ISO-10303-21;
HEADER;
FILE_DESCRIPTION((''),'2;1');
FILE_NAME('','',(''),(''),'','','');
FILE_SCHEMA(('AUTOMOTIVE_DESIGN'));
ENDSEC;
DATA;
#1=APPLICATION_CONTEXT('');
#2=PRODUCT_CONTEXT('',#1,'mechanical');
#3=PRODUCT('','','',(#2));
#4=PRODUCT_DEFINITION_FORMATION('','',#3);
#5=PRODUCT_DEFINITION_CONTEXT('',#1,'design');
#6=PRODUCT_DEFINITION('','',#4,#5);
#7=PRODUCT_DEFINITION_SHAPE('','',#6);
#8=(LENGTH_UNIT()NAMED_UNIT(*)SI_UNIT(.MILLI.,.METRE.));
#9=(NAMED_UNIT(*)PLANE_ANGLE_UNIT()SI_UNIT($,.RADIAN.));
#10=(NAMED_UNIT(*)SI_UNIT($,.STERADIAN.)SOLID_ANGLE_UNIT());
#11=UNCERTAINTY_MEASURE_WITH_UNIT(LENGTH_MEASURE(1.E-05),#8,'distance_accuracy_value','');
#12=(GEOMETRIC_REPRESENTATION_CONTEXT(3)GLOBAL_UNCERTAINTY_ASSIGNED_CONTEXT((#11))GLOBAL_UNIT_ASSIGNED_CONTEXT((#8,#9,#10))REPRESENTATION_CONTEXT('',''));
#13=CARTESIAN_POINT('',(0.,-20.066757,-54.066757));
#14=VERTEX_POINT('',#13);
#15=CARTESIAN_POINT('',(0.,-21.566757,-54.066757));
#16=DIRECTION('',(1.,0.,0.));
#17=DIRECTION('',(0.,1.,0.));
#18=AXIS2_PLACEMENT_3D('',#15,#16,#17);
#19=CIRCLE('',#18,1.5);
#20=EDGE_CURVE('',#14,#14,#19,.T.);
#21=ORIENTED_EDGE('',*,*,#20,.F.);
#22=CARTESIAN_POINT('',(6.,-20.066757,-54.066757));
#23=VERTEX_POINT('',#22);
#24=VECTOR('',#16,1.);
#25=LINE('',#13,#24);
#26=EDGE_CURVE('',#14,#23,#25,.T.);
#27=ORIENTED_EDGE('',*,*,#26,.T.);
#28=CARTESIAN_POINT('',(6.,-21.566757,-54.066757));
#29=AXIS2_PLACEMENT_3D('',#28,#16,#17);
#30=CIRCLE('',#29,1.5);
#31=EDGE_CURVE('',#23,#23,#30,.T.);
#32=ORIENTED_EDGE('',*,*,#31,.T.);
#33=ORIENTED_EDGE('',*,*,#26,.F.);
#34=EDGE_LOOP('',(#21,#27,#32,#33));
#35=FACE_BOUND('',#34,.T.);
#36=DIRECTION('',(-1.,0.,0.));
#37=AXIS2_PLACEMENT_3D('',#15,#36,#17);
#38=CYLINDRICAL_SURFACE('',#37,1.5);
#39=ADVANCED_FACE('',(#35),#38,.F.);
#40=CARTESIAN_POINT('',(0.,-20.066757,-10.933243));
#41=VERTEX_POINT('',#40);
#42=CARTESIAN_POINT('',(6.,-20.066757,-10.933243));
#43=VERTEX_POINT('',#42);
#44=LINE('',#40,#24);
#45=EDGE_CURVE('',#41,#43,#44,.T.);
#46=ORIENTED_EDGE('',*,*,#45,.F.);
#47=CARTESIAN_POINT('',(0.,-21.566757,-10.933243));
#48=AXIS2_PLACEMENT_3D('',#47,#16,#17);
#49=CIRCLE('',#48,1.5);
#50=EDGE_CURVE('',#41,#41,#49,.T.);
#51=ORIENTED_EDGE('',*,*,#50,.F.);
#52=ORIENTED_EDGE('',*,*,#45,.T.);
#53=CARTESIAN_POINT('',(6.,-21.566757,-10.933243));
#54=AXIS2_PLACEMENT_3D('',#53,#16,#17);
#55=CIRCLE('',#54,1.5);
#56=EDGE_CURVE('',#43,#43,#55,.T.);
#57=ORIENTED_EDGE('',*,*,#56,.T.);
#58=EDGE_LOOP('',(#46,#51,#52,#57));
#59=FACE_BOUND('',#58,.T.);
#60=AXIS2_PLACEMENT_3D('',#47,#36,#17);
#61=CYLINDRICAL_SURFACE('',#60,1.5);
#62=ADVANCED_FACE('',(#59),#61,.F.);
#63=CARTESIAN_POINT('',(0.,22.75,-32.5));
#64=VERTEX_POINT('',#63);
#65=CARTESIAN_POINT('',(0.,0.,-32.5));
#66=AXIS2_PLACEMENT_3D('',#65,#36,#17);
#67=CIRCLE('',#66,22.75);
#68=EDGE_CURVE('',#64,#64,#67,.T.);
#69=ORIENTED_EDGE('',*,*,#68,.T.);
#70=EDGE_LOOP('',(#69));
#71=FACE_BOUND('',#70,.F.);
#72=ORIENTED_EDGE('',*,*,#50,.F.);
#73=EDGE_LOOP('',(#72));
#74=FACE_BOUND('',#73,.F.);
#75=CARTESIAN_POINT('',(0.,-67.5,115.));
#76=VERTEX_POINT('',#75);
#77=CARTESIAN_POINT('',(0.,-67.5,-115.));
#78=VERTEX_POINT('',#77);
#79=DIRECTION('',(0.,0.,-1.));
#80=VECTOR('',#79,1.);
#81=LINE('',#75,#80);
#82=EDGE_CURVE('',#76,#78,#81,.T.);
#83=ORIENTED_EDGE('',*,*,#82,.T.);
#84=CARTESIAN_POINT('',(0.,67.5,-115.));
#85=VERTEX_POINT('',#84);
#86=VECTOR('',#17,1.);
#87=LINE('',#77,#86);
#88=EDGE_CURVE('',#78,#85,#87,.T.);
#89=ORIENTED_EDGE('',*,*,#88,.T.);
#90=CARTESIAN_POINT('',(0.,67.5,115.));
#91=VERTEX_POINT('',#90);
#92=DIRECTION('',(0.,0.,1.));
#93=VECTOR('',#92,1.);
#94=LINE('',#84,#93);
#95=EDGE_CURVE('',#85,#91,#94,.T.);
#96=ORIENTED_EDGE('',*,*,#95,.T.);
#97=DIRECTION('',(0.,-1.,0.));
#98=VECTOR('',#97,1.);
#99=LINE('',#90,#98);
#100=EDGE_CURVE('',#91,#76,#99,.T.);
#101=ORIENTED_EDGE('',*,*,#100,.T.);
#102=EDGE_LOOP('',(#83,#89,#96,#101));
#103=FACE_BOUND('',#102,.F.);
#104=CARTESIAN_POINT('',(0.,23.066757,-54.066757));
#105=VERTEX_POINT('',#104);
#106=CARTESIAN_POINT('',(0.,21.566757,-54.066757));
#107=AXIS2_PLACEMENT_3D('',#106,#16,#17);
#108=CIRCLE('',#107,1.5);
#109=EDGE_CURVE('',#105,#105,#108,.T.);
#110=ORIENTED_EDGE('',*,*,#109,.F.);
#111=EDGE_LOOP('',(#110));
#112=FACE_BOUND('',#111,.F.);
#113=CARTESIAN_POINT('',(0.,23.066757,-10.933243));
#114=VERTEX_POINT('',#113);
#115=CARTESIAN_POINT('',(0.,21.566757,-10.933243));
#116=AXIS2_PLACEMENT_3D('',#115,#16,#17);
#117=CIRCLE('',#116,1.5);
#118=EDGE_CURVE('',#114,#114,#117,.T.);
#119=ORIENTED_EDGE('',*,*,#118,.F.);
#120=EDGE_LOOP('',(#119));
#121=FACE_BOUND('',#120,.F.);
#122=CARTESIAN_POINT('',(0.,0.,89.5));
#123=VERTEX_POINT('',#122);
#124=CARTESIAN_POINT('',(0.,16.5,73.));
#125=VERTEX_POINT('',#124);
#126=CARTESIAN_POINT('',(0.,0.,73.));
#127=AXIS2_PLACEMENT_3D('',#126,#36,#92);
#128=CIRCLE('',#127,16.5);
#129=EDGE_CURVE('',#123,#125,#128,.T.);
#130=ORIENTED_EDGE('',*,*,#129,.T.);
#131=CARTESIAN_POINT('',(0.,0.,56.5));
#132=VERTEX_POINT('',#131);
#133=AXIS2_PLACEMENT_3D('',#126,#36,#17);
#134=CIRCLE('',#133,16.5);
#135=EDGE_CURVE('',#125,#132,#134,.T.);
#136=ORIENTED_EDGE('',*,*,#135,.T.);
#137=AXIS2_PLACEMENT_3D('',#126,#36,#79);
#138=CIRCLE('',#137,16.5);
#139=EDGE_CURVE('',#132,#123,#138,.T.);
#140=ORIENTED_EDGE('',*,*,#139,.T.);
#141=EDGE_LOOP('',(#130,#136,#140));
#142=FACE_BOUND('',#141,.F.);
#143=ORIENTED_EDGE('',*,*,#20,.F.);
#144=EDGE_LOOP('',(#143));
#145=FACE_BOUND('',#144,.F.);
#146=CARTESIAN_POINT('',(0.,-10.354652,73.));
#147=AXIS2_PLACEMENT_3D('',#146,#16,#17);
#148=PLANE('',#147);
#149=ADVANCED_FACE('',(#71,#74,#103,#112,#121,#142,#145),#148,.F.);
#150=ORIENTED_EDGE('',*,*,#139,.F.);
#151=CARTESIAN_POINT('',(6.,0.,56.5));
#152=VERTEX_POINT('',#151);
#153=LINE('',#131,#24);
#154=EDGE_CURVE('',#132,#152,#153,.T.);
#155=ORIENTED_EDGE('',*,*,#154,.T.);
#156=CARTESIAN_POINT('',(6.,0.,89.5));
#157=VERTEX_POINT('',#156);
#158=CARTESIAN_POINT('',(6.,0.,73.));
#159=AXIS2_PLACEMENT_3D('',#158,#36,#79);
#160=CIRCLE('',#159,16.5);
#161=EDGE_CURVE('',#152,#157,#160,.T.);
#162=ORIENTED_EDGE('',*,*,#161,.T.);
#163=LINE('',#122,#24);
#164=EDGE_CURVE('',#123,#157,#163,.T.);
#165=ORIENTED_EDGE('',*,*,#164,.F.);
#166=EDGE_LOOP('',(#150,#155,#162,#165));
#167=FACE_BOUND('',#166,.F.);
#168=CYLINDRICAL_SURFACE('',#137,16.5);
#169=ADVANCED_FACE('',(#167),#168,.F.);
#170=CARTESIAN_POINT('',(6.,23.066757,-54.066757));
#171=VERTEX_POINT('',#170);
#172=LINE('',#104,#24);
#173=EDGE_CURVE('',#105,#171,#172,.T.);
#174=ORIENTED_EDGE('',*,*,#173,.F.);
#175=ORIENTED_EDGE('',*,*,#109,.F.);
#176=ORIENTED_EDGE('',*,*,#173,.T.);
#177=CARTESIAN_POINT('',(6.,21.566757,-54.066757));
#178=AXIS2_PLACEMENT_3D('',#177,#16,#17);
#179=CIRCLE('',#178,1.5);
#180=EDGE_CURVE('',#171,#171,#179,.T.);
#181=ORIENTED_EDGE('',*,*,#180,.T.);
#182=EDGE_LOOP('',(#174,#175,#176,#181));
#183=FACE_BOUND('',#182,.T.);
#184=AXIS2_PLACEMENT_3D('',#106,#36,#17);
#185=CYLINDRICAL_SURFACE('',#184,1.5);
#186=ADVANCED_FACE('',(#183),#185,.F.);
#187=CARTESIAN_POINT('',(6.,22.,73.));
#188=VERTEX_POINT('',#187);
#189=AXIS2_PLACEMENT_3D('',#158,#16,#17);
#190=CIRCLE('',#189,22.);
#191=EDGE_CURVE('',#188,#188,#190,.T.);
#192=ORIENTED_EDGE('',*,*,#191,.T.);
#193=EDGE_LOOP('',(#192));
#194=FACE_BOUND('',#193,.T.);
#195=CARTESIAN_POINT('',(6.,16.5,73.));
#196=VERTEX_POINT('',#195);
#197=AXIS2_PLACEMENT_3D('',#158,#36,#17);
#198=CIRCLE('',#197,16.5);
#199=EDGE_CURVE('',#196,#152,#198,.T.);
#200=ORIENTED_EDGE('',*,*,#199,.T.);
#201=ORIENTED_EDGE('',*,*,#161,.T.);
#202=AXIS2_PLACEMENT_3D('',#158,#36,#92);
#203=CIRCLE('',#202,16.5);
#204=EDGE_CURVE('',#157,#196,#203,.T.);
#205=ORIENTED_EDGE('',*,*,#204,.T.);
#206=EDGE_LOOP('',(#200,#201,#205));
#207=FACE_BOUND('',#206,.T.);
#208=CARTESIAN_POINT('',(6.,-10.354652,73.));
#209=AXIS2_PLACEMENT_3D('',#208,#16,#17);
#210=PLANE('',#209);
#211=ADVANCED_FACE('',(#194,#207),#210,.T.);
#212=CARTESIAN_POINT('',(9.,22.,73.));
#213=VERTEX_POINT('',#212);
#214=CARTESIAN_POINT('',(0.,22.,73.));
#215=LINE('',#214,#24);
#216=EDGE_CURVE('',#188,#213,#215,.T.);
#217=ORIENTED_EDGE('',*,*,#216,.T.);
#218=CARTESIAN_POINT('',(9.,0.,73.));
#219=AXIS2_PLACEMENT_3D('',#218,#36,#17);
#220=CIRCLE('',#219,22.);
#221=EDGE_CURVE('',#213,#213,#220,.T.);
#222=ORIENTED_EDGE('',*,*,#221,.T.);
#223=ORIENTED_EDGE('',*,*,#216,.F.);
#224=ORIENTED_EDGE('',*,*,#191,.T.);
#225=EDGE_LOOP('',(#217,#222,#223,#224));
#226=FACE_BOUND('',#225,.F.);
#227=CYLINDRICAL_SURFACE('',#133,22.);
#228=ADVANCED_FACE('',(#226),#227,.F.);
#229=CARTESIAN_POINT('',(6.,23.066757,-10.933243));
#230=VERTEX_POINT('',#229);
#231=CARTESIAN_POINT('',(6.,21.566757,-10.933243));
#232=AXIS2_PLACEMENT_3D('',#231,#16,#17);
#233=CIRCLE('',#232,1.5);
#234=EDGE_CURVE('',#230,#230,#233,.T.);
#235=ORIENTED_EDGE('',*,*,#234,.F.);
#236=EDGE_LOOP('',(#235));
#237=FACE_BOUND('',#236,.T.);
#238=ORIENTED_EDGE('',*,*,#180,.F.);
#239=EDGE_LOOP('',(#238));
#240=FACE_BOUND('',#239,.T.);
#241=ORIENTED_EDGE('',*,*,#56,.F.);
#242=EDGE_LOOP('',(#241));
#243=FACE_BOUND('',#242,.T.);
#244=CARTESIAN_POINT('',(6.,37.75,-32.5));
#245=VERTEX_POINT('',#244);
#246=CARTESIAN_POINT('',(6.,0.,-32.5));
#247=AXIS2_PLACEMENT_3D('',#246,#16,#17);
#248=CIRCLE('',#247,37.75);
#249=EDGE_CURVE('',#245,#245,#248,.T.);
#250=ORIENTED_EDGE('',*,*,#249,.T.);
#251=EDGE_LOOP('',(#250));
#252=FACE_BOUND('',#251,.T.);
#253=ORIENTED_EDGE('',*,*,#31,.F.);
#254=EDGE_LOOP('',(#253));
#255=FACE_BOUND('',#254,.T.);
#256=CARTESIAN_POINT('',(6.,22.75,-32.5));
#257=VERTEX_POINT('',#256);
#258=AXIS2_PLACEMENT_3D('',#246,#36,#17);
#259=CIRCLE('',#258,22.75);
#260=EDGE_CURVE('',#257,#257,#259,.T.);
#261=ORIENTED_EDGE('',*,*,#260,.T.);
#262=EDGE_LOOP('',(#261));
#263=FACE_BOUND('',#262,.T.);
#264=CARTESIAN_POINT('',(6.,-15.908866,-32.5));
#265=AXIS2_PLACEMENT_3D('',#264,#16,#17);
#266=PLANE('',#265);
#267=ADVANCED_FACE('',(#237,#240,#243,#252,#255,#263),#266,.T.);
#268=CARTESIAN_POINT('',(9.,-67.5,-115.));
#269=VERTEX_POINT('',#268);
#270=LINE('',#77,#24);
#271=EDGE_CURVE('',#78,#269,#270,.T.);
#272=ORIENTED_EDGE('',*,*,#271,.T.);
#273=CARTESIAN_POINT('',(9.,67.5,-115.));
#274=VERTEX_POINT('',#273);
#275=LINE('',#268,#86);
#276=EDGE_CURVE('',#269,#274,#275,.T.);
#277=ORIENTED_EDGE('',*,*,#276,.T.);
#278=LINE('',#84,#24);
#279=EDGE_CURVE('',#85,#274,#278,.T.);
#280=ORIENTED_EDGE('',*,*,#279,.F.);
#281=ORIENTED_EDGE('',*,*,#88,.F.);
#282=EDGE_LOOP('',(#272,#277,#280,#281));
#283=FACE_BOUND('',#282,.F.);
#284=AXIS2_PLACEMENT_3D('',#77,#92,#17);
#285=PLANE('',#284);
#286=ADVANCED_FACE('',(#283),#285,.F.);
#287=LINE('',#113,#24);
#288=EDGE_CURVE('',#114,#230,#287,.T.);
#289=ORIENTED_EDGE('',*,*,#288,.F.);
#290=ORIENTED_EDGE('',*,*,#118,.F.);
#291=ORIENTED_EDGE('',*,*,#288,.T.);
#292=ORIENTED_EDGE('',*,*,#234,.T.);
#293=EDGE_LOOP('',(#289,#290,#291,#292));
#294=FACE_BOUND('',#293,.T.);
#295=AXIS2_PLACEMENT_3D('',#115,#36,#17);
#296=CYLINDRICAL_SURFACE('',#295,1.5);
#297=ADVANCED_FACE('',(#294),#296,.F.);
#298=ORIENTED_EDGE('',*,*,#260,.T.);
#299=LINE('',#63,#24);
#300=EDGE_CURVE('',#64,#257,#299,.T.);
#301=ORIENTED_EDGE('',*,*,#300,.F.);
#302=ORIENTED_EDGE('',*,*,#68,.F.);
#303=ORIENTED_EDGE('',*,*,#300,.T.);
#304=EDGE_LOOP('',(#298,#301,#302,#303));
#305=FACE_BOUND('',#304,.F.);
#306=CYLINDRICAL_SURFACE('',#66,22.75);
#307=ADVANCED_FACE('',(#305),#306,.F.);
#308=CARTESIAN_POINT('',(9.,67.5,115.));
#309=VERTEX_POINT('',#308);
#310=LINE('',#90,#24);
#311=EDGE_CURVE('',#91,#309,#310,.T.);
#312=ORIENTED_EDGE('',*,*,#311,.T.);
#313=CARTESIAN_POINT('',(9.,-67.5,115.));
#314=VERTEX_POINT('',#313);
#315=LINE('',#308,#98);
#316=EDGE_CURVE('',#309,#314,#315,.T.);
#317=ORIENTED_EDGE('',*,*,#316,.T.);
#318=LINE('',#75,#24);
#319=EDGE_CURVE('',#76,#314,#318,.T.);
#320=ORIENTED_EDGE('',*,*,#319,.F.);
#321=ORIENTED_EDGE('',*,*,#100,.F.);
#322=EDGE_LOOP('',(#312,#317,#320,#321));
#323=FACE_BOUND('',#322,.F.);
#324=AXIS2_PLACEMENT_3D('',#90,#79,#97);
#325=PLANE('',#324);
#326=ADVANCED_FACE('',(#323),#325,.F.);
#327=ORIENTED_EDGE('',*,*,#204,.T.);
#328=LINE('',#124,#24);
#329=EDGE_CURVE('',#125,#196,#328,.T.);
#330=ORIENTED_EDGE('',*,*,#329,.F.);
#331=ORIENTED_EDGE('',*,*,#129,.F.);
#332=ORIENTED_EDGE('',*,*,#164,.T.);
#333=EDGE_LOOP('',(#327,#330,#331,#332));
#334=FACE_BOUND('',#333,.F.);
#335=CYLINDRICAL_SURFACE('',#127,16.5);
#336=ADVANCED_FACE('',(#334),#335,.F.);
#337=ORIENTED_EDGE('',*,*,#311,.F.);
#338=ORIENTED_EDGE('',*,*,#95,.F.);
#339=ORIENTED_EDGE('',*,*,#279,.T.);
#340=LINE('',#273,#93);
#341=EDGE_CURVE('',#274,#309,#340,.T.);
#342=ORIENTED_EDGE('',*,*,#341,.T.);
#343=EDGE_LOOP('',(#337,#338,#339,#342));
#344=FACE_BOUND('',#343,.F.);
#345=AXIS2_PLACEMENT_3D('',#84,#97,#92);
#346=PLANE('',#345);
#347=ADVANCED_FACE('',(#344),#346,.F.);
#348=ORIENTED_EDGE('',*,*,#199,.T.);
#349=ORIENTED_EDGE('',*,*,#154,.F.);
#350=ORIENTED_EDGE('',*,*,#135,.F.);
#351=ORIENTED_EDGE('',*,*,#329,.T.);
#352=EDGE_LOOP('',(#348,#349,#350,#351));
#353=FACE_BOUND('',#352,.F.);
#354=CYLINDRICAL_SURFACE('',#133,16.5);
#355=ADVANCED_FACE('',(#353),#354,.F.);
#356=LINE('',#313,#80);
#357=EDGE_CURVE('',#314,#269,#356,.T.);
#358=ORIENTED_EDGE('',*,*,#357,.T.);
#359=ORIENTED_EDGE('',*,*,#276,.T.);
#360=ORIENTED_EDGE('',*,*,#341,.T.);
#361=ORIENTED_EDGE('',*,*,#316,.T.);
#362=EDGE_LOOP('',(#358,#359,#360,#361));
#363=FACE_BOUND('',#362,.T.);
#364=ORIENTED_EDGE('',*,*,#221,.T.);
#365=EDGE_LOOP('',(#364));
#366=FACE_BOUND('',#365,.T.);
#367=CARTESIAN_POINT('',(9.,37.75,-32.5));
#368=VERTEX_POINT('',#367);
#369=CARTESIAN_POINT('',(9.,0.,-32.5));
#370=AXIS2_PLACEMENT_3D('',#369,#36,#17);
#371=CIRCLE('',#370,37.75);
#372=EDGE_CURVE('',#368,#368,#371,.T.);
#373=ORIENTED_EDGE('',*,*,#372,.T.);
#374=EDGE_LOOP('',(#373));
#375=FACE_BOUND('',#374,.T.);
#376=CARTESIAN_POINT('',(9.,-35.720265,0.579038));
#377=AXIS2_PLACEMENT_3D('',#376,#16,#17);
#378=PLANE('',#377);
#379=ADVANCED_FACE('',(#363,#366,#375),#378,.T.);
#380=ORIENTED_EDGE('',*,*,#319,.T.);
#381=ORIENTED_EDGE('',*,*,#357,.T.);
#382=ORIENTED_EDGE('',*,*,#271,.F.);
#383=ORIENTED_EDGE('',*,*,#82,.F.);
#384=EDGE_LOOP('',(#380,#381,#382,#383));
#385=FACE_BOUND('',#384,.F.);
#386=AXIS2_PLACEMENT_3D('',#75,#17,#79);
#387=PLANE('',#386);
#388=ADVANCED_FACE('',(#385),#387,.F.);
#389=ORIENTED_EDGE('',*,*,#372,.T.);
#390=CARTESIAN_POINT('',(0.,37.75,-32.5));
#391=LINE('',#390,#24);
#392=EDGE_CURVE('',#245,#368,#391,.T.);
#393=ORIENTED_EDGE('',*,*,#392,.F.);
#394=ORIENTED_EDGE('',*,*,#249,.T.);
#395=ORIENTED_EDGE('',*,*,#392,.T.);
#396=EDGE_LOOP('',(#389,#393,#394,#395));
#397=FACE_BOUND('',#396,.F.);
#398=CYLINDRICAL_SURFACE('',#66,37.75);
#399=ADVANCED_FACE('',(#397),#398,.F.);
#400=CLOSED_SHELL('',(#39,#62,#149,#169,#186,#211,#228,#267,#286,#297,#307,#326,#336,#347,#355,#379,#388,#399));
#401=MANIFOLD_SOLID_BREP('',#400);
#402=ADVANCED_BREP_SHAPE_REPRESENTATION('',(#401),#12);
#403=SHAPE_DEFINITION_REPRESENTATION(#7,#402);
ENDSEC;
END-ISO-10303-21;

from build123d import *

# Parameters (mm, degrees)
F1_DEPTH = 9
F0_R     = 1.5
F2_DEPTH = 6


# Not quite as in the source:
# - a feature names something its author has since deleted; it is built from what else it names


with BuildPart() as f1:
    # F0 (on Right) → F1 (new body)
    with BuildSketch(Plane.YZ):
        with BuildLine():
            Line((0, 115), (-67.5, 115))
            Line((-67.5, 115), (-67.5, -115))
            Line((-67.5, -115), (0, -115))
            Line((0, -115), (0, -70.25))
            ThreePointArc((0, -70.25), (-37.75, -32.5), (0, 5.25))
            Line((0, 5.25), (0, 51))
            ThreePointArc((0, 51), (-22, 73), (0, 95))
            Line((0, 95), (0, 115))
        make_face()
        with BuildLine():
            Line((67.5, 115), (0, 115))
            Line((0, 115), (0, 95))
            ThreePointArc((0, 95), (15.5563491861, 88.5563491861), (22, 73))
            ThreePointArc((22, 73), (15.5563491861, 57.4436508139), (0, 51))
            Line((0, 51), (0, 5.25))
            ThreePointArc((0, 5.25), (26.6932809898, -5.8067190102), (37.75, -32.5))
            ThreePointArc((37.75, -32.5), (26.6932809898, -59.1932809898), (0, -70.25))
            Line((0, -70.25), (0, -115))
            Line((0, -115), (67.5, -115))
            Line((67.5, -115), (67.5, 115))
        make_face()
    extrude(amount=F1_DEPTH)

    # F0 (on Right) → F2 (join)
    with BuildSketch(Plane.YZ):
        with BuildLine():
            Line((0, 89.5), (0, 95))
            ThreePointArc((0, 95), (-22, 73), (0, 51))
            Line((0, 51), (0, 56.5))
            ThreePointArc((0, 56.5), (-16.5, 73), (0, 89.5))
        make_face()
        with BuildLine():
            ThreePointArc((22, 73), (15.5563491861, 88.5563491861), (0, 95))
            Line((0, 95), (0, 89.5))
            ThreePointArc((0, 89.5), (11.6672618896, 84.6672618896), (16.5, 73))
            ThreePointArc((16.5, 73), (11.6672618896, 61.3327381104), (0, 56.5))
            Line((0, 56.5), (0, 51))
            ThreePointArc((0, 51), (15.5563491861, 57.4436508139), (22, 73))
        make_face()
        with BuildLine():
            ThreePointArc((0, 5.25), (-37.75, -32.5), (0, -70.25))
            Line((0, -70.25), (0, -55.25))
            ThreePointArc((0, -55.25), (-22.75, -32.5), (0, -9.75))
            Line((0, -9.75), (0, 5.25))
        make_face()
        with Locations((-21.5667568262, -54.0667568262)):
            Circle(F0_R, mode=Mode.SUBTRACT)
        with Locations((-21.5667568262, -10.9332431738)):
            Circle(F0_R, mode=Mode.SUBTRACT)
        with BuildLine():
            Line((0, -55.25), (0, -70.25))
            ThreePointArc((0, -70.25), (26.6932809898, -59.1932809898), (37.75, -32.5))
            ThreePointArc((37.75, -32.5), (26.6932809898, -5.8067190102), (0, 5.25))
            Line((0, 5.25), (0, -9.75))
            ThreePointArc((0, -9.75), (16.086679272, -16.413320728), (22.75, -32.5))
            ThreePointArc((22.75, -32.5), (16.086679272, -48.586679272), (0, -55.25))
        make_face()
        with Locations((21.5667568262, -54.0667568262)):
            Circle(F0_R, mode=Mode.SUBTRACT)
        with Locations((21.5667568262, -10.9332431738)):
            Circle(F0_R, mode=Mode.SUBTRACT)
    extrude(amount=F2_DEPTH)


solid = f1.part
